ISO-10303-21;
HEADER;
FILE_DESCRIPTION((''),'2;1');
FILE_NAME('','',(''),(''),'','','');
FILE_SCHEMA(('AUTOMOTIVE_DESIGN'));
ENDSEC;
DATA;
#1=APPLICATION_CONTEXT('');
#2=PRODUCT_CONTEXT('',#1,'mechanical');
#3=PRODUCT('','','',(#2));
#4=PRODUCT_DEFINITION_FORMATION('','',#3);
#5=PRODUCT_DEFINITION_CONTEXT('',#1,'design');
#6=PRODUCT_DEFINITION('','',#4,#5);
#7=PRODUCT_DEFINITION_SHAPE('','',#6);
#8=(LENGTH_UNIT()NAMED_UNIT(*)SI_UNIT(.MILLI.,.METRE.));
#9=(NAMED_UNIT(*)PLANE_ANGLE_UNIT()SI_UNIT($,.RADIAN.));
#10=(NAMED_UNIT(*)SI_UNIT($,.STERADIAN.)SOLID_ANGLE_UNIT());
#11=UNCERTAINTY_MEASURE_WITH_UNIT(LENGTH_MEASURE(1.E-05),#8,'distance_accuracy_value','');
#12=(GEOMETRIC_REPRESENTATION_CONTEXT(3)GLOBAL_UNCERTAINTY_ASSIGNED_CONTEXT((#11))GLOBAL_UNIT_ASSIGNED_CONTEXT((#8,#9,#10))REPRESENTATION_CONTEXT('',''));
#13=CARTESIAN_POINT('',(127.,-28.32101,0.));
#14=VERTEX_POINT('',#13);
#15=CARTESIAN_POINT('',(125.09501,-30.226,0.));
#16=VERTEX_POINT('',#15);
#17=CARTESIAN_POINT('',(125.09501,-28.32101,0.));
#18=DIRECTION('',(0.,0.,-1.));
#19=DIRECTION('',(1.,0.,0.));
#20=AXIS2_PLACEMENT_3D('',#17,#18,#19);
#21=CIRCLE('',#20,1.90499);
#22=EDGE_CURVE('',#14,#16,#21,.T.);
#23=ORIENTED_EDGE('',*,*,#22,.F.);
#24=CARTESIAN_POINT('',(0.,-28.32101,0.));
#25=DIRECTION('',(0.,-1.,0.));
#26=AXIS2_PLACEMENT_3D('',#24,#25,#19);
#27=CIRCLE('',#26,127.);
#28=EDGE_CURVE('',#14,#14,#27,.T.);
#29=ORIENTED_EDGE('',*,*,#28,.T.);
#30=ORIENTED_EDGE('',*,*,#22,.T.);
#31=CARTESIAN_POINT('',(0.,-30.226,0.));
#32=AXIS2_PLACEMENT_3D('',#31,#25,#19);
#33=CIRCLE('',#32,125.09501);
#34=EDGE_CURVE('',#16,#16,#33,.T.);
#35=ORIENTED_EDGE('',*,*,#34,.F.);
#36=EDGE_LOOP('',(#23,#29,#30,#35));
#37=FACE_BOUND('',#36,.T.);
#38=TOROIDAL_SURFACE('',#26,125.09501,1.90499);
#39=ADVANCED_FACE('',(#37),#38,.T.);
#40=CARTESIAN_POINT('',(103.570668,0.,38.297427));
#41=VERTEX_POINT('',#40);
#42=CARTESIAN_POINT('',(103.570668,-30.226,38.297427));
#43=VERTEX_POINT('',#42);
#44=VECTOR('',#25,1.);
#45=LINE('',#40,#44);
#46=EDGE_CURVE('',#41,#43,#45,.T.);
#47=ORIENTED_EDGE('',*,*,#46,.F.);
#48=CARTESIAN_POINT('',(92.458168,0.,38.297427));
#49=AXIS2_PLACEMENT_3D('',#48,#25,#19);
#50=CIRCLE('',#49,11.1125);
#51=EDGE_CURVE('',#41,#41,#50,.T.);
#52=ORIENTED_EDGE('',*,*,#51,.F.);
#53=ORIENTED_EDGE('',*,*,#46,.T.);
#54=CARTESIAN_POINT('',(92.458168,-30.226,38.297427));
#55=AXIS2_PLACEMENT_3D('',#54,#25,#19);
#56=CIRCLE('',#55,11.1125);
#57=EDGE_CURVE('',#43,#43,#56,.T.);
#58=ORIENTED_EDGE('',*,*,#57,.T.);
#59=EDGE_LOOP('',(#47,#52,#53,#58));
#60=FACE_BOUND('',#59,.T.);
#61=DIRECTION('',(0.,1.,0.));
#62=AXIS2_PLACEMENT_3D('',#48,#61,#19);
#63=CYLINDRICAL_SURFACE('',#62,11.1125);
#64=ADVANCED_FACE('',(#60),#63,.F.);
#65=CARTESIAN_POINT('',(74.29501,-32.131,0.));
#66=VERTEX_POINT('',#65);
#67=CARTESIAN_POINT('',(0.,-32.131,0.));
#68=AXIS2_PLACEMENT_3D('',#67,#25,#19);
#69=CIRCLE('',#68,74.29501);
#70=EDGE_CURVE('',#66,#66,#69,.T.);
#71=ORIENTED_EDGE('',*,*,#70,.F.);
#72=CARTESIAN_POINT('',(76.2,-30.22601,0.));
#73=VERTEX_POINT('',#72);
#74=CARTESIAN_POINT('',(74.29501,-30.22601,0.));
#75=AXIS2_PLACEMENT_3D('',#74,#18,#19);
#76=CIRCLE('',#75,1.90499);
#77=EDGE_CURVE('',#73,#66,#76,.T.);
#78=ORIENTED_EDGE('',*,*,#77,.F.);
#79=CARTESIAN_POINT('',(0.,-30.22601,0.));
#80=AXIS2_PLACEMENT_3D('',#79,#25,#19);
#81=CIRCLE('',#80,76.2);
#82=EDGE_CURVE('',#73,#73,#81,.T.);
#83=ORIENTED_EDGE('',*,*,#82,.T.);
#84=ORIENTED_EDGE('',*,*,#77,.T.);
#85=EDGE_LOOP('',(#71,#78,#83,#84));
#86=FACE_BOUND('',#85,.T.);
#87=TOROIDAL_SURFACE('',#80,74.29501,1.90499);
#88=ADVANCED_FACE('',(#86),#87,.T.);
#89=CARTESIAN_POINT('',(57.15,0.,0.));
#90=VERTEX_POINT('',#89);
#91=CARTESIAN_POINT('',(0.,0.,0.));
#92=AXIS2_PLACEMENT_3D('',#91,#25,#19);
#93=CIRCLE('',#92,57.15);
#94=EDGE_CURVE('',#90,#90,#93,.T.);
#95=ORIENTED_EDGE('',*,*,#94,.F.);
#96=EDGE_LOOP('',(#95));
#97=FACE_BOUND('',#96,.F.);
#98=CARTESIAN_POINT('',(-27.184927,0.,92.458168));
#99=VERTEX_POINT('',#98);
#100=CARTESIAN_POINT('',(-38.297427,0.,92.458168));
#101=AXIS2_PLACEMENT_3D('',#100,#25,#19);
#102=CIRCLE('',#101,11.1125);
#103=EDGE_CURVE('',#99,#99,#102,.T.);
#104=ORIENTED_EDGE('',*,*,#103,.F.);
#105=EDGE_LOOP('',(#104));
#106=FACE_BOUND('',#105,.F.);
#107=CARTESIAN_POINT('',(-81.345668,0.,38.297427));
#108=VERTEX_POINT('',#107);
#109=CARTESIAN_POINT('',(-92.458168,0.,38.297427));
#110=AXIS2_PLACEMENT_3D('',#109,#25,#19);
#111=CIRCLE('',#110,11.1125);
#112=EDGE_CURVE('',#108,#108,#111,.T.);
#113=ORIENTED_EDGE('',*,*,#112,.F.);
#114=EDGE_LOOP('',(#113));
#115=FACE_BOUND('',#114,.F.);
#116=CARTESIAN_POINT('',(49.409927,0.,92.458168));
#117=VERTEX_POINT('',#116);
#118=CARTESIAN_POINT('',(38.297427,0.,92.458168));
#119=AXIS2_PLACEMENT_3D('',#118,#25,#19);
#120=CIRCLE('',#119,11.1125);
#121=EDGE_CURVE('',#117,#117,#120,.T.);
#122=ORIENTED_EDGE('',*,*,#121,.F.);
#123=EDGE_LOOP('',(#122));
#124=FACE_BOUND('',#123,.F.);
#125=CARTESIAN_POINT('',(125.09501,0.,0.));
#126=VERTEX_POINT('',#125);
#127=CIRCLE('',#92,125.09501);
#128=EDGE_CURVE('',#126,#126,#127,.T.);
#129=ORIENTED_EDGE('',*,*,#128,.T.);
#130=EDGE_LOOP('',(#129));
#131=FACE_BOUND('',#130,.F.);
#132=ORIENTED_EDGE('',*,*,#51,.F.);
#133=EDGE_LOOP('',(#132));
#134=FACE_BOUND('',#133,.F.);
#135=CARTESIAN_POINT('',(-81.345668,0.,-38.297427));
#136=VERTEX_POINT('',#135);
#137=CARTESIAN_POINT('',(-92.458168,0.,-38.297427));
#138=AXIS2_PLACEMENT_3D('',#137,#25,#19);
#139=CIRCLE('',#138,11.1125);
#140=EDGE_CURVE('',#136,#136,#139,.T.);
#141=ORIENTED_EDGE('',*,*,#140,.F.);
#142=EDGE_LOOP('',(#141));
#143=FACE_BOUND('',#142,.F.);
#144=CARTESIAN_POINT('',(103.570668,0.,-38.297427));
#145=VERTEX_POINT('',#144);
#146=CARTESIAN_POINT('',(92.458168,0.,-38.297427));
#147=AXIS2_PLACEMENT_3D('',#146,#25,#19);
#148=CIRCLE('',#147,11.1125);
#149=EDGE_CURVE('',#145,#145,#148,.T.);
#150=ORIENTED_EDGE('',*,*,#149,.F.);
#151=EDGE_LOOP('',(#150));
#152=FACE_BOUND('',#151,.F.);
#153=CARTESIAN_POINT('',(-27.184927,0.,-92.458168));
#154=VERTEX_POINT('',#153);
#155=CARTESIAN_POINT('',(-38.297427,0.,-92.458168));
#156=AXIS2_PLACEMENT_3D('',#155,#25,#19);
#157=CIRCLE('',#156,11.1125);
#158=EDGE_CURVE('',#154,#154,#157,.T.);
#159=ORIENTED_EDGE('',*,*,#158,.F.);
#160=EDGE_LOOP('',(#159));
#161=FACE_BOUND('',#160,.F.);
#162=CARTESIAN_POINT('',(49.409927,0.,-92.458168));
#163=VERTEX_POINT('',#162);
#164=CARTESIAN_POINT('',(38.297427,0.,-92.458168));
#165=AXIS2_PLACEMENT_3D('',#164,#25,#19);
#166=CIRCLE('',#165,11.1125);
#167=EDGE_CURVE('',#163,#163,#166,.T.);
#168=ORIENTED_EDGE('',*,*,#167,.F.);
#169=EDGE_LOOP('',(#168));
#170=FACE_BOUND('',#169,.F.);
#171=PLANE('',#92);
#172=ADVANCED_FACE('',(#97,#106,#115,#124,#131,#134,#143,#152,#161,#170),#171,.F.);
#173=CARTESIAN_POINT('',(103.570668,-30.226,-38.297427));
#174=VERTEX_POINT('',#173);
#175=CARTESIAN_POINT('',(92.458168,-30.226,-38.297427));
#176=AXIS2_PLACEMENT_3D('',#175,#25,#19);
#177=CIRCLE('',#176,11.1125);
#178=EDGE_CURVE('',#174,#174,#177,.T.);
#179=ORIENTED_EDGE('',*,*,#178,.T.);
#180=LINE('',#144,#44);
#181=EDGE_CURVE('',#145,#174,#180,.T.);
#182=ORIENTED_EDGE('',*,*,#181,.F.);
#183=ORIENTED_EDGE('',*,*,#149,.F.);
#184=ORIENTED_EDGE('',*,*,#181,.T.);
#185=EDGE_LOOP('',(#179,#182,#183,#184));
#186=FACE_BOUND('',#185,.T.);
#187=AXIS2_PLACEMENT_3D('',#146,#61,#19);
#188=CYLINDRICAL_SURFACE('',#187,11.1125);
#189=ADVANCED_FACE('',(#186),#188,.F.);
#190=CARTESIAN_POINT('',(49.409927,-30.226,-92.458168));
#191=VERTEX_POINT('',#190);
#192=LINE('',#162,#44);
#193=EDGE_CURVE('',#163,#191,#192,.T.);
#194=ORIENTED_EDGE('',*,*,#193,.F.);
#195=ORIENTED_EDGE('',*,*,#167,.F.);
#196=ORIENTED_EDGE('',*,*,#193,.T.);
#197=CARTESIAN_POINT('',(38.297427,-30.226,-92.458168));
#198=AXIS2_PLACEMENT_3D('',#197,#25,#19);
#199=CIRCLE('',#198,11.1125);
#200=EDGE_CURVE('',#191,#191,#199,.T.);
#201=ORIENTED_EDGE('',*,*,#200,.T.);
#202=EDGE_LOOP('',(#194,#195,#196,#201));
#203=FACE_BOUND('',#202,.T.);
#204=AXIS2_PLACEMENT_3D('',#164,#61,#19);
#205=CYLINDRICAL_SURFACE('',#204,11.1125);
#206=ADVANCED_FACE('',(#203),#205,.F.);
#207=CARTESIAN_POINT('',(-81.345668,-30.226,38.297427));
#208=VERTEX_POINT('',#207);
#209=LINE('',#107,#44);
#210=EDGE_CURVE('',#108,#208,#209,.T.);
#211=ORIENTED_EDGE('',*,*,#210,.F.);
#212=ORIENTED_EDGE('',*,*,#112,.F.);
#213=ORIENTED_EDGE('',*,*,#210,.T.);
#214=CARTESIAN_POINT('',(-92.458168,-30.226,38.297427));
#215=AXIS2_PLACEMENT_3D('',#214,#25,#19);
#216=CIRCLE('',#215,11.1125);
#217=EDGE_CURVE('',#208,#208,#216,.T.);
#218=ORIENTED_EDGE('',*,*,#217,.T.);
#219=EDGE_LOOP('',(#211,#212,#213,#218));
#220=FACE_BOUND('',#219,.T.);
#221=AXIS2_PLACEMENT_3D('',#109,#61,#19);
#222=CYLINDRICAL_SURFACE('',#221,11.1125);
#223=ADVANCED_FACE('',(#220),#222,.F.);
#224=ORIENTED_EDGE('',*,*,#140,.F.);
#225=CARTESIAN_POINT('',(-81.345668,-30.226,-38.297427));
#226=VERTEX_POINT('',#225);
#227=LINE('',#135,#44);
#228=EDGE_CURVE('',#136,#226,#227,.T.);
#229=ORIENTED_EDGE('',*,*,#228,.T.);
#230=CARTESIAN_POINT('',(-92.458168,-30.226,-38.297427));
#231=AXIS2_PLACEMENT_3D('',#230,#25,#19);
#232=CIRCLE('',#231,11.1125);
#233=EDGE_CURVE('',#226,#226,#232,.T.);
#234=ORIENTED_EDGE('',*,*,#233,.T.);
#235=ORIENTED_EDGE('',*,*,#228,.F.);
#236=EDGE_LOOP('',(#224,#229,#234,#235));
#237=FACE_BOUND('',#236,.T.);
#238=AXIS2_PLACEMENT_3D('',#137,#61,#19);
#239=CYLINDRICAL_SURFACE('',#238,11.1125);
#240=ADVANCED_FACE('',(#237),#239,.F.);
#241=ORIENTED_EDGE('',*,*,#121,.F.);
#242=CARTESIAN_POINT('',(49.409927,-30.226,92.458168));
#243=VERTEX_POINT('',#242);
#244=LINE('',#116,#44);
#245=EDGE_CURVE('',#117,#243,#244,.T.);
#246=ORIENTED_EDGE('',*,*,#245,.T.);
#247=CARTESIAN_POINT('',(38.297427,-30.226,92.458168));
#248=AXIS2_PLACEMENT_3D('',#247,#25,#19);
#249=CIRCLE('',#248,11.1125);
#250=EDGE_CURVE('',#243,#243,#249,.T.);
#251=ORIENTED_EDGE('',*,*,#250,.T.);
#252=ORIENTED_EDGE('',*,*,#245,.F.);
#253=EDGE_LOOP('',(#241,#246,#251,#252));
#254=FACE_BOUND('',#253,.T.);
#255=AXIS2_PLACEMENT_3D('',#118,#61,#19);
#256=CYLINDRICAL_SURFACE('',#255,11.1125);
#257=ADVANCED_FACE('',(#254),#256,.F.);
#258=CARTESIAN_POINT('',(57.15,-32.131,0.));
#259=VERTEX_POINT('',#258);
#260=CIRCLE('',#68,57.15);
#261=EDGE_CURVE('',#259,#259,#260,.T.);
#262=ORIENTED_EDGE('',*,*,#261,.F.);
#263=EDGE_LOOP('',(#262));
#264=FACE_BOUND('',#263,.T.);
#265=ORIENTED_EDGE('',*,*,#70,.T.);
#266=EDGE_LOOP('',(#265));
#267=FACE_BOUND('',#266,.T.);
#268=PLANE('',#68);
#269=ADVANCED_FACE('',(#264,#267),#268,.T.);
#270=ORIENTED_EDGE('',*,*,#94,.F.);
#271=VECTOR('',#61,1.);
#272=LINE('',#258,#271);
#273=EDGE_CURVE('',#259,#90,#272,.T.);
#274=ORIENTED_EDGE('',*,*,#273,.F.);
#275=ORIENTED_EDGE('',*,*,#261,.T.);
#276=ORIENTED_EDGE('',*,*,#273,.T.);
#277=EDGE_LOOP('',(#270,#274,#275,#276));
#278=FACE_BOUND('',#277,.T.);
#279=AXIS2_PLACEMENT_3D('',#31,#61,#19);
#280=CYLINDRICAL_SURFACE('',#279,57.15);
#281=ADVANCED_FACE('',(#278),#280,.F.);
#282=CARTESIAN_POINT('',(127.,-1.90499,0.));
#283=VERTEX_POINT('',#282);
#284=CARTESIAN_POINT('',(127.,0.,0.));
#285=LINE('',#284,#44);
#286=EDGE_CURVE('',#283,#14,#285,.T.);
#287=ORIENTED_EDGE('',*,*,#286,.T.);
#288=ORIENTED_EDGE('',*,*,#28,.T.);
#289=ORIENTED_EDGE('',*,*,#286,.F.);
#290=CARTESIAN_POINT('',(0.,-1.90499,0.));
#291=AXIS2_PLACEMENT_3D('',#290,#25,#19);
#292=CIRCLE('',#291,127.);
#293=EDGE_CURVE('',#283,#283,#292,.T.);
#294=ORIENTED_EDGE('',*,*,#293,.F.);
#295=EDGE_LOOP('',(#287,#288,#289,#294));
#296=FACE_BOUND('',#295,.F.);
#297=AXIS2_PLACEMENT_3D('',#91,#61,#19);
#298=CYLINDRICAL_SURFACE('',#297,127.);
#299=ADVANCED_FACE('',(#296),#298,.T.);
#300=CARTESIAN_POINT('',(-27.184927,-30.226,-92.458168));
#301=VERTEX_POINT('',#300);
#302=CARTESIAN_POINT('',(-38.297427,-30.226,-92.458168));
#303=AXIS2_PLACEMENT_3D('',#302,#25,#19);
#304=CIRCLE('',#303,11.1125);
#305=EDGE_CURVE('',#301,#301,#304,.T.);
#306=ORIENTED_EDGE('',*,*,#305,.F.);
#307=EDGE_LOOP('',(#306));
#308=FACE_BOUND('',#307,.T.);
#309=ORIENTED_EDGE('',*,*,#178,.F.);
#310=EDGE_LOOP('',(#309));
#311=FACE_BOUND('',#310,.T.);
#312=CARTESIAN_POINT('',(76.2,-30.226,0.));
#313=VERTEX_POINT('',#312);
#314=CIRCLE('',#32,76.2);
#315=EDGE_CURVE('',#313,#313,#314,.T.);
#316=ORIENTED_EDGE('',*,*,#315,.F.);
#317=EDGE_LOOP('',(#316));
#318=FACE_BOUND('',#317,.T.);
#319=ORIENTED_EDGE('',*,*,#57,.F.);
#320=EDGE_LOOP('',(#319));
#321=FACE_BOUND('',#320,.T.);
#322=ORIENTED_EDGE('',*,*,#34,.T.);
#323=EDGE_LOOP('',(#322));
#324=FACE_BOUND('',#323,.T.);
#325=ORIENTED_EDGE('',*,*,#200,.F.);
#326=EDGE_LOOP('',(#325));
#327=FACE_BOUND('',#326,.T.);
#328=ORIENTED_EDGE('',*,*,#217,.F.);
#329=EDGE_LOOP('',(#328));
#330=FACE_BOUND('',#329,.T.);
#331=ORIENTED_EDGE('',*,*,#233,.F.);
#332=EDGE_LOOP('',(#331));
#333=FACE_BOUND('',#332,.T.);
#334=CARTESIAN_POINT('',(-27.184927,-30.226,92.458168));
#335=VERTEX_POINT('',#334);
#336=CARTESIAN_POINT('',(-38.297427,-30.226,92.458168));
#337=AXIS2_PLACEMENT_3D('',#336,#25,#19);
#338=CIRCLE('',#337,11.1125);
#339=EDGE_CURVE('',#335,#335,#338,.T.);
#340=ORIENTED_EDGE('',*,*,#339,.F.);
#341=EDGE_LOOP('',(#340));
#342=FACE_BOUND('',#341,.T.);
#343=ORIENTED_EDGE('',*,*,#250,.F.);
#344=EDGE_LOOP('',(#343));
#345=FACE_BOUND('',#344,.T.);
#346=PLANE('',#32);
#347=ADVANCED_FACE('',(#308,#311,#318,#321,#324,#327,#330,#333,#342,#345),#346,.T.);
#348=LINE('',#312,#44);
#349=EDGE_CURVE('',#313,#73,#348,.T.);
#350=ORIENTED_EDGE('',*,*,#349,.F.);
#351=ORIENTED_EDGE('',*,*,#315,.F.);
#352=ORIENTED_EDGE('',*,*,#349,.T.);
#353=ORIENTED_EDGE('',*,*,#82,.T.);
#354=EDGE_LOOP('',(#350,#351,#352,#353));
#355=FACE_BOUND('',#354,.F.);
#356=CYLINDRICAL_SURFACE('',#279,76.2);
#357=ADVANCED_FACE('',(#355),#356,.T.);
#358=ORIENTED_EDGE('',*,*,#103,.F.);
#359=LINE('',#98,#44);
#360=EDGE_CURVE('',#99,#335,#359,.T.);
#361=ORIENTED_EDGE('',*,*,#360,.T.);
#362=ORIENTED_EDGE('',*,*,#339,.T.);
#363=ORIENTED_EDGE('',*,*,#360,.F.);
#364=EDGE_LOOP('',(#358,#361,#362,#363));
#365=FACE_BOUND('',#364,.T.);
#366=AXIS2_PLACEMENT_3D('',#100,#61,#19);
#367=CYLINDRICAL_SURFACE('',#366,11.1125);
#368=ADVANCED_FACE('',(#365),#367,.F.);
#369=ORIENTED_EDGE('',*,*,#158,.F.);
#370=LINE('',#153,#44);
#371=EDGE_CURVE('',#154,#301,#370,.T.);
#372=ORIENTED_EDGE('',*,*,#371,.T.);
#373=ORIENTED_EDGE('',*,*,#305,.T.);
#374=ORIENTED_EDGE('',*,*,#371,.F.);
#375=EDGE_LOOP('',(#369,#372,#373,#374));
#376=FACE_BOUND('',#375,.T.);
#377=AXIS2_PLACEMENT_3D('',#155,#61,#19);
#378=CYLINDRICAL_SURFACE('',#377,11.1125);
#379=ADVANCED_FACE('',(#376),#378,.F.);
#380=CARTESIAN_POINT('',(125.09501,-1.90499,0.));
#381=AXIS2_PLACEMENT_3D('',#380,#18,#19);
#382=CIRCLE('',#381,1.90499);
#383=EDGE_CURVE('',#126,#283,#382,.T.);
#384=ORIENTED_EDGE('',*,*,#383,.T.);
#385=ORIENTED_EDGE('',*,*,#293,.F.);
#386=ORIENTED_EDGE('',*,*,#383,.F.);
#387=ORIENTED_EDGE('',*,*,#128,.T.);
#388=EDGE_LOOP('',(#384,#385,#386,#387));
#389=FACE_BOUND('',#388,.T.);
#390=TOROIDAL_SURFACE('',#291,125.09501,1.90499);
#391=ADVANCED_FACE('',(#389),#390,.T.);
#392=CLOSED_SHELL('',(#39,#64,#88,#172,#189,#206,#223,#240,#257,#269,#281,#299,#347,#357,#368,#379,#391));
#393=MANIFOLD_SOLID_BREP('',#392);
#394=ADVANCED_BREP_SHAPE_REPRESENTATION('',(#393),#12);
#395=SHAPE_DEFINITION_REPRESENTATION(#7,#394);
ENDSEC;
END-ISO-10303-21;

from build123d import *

# Parameters (mm, degrees)
F0_R     = 127
F0_R_2   = 11.1125
F0_R_3   = 57.15
F1_DEPTH = 30.226
F2_R     = 76.2
F2_R_2   = 57.15
F3_DEPTH = 1.905
F4_R     = 1.90499


# Not quite as in the source:
# - a fillet or chamfer is up to 0.001 mm smaller than in the source, because OpenCascade refuses the exact size


with BuildPart() as f1:
    # F0 (on Front) → F1 (new body)
    with BuildSketch(Plane.XZ):
        Circle(F0_R)
        with Locations((-38.2974271774, -92.4581680956)):
            Circle(F0_R_2, mode=Mode.SUBTRACT)
        with Locations((-92.4581680956, -38.2974271774)):
            Circle(F0_R_2, mode=Mode.SUBTRACT)
        with Locations((38.2974271774, -92.4581680956)):
            Circle(F0_R_2, mode=Mode.SUBTRACT)
        with Locations((92.4581680956, -38.2974271774)):
            Circle(F0_R_2, mode=Mode.SUBTRACT)
        with Locations((-92.4581680956, 38.2974271774)):
            Circle(F0_R_2, mode=Mode.SUBTRACT)
        with Locations((-38.2974271774, 92.4581680956)):
            Circle(F0_R_2, mode=Mode.SUBTRACT)
        Circle(F0_R_3, mode=Mode.SUBTRACT)
        with Locations((92.4581680956, 38.2974271774)):
            Circle(F0_R_2, mode=Mode.SUBTRACT)
        with Locations((38.2974271774, 92.4581680956)):
            Circle(F0_R_2, mode=Mode.SUBTRACT)
    extrude(amount=F1_DEPTH)

    # F2 (on face) → F3 (join)
    with BuildSketch(Plane.XZ.offset(30.226)):
        Circle(F2_R)
        Circle(F2_R_2, mode=Mode.SUBTRACT)
    extrude(amount=F3_DEPTH)

    # F4 (radius 1.905 in the source; OpenCascade refuses exactly that, so slightly less here)
    f4_edges = [f1.edges().sort_by_distance(p)[0] for p in [
        (-127, 0, 0),
        (-127, -30.226, 0),
        (-76.2, -32.131, 0),
    ]]
    fillet(f4_edges, radius=F4_R)


solid = f1.part
